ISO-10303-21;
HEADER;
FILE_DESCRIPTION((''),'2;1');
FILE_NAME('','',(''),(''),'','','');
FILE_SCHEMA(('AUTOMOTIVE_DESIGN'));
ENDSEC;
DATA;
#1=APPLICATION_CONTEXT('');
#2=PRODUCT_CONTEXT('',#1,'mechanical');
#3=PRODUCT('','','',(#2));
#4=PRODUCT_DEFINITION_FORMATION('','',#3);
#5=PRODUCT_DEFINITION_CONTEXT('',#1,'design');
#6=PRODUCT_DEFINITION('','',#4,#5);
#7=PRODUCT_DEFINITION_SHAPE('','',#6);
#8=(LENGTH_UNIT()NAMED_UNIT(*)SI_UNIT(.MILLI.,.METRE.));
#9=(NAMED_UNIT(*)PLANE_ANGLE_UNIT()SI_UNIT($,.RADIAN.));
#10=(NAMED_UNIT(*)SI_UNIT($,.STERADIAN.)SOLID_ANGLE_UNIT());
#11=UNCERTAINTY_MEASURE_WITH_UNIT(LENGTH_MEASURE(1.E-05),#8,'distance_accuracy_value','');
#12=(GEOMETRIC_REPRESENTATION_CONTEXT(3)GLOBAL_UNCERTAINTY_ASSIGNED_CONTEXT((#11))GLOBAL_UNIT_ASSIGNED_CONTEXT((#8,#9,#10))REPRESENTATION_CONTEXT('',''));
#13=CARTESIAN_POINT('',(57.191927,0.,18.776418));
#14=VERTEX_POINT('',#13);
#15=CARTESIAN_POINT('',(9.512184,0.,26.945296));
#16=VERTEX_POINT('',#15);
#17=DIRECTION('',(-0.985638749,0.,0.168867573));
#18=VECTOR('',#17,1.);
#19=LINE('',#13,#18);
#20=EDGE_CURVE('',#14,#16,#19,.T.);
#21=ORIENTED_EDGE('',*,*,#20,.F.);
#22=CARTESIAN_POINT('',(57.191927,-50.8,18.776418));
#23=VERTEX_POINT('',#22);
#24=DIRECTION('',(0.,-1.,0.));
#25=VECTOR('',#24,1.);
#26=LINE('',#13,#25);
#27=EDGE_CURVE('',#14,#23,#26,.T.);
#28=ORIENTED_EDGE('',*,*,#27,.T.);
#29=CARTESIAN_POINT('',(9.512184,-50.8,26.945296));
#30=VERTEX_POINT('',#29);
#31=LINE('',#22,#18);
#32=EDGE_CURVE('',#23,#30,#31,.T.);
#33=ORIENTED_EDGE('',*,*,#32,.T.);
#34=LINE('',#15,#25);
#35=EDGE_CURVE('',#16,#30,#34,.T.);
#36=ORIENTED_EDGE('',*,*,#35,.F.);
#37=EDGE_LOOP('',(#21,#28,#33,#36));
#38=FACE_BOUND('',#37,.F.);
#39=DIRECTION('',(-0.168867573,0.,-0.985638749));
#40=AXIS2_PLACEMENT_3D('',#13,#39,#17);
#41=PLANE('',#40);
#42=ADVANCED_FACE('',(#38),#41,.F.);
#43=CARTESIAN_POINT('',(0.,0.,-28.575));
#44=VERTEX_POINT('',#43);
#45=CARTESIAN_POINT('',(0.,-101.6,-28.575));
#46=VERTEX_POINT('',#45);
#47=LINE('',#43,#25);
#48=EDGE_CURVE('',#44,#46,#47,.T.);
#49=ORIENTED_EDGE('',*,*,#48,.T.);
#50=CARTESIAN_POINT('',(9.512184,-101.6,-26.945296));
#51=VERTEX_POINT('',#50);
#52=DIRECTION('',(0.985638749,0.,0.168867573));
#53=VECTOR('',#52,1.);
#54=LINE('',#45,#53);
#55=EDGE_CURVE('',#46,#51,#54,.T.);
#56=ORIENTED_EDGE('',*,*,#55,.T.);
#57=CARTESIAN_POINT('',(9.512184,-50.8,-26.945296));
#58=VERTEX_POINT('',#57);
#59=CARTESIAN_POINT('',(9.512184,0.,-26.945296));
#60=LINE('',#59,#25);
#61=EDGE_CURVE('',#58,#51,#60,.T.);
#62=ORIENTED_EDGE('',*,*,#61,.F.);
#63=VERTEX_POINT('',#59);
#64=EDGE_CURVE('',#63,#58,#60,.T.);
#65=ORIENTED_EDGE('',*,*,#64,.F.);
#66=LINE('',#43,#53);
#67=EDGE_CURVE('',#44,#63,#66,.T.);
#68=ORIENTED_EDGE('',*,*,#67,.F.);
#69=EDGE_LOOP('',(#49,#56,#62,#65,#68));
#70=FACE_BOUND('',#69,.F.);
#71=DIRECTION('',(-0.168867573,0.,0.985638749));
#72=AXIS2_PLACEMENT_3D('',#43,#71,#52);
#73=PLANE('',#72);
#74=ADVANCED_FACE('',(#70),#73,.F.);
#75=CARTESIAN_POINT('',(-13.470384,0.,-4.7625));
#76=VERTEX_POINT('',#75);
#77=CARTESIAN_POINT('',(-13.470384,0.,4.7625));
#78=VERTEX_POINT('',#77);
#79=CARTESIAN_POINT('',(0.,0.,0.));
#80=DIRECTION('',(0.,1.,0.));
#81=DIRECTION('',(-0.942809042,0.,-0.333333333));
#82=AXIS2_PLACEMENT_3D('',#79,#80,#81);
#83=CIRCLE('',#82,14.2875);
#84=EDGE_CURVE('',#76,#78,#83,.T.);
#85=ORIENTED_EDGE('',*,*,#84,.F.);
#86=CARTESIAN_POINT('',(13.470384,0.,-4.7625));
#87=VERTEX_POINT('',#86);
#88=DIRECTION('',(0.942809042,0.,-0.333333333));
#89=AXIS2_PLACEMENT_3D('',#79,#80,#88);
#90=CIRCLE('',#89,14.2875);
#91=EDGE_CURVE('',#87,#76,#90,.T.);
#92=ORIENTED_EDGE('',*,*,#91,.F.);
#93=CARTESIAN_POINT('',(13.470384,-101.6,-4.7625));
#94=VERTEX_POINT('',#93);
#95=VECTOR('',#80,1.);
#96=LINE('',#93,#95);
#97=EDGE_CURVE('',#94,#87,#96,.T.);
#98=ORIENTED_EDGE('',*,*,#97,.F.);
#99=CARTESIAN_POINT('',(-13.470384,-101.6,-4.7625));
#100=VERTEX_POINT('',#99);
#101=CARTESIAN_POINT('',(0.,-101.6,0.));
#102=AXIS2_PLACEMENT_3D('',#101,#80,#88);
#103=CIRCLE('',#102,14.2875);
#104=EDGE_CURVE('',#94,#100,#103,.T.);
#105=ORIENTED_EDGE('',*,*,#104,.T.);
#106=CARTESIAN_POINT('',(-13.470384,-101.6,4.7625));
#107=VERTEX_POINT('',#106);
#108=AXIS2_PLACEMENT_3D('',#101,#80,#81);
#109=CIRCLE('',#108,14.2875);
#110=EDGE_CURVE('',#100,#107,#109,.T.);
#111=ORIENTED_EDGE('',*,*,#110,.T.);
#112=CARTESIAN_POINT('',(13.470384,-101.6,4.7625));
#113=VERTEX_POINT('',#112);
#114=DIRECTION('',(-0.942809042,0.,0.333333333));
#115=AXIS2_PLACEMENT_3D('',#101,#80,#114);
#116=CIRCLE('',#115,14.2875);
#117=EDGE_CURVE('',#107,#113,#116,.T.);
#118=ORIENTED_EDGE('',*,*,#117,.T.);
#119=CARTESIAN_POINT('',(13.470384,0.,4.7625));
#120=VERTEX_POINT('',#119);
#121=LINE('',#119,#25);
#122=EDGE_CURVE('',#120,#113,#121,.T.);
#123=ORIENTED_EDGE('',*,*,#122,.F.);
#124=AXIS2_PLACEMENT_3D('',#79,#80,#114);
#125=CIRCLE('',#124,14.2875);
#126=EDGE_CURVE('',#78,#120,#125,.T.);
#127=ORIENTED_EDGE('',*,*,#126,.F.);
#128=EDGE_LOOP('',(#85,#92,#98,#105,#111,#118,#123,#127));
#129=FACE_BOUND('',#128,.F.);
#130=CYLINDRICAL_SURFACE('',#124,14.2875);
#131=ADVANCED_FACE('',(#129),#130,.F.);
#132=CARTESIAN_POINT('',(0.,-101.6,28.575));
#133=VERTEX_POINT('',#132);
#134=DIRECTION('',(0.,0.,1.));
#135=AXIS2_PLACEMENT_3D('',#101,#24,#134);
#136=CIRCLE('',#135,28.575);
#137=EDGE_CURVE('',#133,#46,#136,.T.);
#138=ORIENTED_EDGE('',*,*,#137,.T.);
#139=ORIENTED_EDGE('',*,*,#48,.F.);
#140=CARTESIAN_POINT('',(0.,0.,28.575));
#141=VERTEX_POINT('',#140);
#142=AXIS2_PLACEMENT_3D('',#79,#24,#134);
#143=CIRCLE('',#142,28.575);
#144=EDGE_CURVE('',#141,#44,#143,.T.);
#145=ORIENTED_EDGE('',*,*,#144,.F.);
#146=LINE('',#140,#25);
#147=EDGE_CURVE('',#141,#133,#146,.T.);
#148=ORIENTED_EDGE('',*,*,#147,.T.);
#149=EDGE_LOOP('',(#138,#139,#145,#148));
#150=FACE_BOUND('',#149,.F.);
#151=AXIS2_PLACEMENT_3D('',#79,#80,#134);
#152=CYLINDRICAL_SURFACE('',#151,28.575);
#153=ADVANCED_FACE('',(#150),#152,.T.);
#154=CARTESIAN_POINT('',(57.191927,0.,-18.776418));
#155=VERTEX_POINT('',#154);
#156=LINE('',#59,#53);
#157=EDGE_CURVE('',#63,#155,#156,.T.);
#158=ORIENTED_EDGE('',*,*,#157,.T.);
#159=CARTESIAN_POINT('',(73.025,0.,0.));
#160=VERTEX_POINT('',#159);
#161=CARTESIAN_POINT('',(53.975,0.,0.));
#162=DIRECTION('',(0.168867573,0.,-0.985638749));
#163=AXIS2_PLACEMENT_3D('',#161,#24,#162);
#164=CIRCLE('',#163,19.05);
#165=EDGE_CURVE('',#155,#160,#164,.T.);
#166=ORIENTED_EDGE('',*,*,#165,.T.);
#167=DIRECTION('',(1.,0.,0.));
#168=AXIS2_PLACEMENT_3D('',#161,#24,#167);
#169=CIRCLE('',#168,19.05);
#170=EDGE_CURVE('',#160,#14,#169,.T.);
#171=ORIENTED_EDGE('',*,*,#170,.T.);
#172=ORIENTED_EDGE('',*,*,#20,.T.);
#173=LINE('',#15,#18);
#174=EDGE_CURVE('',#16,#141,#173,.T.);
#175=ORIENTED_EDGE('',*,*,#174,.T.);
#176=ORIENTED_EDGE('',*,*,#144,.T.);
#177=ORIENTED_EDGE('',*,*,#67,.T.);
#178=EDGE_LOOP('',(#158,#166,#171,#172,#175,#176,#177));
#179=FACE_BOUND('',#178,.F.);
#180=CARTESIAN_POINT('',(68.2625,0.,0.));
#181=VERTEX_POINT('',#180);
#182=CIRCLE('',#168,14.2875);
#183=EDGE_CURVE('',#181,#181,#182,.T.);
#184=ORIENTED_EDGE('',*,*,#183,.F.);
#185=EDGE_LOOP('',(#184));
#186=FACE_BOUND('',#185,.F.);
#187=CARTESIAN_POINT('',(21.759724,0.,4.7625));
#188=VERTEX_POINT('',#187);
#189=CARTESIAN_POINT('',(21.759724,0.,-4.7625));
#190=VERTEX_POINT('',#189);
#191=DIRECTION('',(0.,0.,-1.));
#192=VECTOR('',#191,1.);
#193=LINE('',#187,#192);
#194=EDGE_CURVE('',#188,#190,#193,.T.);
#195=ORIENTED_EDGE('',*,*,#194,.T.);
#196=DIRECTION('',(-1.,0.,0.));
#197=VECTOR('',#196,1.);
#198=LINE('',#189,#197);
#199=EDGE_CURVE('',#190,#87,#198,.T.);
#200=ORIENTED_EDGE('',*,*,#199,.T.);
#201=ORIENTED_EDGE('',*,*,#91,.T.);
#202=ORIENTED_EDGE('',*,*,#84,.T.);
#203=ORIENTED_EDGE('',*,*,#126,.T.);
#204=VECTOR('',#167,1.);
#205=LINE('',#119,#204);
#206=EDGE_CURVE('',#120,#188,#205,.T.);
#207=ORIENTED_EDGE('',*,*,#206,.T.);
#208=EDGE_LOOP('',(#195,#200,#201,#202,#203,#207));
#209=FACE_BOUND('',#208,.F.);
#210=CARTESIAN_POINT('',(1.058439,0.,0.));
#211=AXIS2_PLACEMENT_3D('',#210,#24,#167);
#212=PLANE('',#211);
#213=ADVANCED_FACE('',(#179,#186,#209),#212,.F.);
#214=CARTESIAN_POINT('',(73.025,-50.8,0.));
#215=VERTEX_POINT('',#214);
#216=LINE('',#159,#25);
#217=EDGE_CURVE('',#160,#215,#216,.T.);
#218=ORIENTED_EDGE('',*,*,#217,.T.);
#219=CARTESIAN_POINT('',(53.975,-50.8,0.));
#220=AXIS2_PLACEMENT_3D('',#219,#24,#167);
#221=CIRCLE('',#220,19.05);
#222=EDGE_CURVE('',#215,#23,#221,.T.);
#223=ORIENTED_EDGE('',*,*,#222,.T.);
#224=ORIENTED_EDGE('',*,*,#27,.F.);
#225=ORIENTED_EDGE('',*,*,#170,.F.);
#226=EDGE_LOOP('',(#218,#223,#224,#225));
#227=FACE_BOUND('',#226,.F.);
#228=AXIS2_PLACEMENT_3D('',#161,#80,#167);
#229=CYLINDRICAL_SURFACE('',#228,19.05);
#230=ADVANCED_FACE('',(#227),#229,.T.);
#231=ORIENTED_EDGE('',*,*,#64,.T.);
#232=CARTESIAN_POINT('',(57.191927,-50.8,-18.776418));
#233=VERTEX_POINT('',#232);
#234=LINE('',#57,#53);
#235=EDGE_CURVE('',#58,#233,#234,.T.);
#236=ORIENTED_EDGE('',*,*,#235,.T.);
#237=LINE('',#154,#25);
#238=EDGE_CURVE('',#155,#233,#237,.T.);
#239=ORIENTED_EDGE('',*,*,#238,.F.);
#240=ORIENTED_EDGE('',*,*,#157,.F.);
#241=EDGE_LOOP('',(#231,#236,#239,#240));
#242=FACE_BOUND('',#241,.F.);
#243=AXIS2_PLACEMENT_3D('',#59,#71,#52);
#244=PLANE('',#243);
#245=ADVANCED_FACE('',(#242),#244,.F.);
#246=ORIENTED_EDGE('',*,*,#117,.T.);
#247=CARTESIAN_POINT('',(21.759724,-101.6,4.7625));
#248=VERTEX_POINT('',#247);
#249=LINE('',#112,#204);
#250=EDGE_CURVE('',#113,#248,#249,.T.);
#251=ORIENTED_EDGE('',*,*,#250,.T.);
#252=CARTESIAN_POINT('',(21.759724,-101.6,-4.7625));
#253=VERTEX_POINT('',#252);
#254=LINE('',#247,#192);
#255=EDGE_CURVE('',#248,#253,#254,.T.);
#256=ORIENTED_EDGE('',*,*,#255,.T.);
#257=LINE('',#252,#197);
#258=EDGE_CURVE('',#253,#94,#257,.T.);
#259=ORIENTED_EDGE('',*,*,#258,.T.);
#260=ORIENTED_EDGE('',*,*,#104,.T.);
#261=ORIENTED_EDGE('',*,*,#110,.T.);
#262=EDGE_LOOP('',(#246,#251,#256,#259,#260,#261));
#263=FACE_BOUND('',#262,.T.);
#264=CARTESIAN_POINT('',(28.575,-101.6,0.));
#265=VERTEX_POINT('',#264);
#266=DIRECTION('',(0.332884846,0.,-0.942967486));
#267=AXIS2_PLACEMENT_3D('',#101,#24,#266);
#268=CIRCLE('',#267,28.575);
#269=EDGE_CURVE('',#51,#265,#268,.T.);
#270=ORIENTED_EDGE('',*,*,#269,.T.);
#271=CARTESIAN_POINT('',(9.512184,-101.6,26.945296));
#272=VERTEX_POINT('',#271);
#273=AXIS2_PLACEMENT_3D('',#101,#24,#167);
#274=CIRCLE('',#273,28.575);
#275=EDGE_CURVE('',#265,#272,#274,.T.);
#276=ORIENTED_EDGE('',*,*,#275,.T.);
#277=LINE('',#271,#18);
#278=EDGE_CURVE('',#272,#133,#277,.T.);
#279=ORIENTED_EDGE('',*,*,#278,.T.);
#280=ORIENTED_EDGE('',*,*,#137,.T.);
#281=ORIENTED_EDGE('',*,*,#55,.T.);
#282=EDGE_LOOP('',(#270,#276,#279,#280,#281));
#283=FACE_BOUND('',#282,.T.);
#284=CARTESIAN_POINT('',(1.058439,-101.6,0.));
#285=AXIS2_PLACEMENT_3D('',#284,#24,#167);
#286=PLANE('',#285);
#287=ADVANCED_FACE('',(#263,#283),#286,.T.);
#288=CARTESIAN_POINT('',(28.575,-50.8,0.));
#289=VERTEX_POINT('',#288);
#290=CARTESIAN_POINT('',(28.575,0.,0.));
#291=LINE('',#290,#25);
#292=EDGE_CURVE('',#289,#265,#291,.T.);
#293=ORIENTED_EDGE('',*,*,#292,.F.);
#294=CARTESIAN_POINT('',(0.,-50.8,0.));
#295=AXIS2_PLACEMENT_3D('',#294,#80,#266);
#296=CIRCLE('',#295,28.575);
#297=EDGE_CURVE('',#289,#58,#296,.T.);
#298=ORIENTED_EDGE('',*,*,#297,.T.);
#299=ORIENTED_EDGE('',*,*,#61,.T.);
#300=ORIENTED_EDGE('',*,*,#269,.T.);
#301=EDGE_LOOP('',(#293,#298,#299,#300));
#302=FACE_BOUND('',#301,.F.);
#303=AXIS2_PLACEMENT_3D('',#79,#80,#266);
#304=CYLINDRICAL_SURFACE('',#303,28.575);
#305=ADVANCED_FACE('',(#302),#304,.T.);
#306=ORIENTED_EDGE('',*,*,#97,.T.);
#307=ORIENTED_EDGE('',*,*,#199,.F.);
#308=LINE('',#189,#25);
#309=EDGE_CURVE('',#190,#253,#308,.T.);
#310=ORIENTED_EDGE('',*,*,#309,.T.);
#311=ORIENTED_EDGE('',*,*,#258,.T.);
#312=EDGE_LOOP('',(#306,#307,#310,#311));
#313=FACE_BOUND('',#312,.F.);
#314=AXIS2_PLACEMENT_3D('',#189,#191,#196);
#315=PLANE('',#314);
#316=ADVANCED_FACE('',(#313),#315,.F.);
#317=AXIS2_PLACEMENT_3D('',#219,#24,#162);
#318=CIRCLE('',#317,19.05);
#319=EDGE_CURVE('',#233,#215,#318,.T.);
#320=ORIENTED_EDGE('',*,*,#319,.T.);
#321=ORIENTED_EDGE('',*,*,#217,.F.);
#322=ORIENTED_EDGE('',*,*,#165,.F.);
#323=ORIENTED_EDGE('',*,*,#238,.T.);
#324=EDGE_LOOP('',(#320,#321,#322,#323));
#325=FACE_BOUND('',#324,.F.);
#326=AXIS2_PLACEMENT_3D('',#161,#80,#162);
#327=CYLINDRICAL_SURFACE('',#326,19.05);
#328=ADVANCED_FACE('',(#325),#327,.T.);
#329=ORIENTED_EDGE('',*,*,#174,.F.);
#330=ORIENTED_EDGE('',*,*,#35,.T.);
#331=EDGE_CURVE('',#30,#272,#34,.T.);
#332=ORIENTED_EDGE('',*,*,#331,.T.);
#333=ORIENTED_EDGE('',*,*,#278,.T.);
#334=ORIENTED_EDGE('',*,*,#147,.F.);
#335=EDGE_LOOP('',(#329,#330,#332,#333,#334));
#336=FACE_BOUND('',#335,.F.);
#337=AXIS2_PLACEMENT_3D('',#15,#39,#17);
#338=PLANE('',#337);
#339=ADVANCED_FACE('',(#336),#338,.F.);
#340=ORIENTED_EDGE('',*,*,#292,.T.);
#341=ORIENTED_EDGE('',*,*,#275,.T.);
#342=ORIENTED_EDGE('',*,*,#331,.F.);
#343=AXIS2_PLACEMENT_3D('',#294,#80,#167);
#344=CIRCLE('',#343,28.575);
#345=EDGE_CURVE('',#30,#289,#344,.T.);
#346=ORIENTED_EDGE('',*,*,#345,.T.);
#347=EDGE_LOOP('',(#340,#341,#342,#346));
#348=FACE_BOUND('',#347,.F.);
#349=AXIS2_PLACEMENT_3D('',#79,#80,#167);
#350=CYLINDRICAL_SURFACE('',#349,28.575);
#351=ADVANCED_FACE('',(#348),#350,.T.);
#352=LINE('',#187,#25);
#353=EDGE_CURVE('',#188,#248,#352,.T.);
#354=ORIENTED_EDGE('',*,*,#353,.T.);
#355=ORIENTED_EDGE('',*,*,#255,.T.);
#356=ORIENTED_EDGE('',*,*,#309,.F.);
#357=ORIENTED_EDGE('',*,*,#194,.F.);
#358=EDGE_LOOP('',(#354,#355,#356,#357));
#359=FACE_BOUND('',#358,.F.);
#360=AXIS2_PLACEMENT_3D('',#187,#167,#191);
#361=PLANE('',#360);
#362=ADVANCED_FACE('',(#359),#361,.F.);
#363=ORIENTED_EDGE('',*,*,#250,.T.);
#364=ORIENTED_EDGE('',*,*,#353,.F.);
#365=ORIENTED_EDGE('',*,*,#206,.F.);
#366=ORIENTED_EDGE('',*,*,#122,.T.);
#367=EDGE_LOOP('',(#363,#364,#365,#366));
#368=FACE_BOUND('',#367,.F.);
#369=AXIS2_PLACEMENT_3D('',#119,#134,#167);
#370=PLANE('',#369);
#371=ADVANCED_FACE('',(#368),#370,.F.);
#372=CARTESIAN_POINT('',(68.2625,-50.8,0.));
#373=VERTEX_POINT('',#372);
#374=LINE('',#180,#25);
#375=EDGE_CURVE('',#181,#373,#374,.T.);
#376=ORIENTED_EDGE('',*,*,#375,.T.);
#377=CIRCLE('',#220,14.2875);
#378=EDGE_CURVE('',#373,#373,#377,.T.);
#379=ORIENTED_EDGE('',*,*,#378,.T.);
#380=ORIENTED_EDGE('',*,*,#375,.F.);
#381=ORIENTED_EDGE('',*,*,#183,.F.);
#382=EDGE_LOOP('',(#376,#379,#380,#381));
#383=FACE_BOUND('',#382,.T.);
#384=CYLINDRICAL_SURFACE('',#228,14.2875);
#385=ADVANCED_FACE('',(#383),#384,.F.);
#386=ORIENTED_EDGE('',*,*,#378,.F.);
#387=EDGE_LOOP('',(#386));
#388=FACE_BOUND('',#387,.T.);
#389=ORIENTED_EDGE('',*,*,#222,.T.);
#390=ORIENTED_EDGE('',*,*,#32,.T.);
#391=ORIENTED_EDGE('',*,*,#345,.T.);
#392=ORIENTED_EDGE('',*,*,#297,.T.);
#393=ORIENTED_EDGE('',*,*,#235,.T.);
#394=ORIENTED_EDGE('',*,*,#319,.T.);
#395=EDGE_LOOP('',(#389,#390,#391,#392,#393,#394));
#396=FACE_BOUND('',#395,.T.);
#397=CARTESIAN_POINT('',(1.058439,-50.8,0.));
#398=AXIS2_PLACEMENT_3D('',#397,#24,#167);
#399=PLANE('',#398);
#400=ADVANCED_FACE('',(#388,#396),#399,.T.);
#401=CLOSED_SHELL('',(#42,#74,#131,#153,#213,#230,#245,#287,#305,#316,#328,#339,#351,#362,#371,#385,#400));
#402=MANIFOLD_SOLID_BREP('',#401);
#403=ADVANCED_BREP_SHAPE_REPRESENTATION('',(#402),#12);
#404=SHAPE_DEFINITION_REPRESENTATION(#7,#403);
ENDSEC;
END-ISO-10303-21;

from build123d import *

# Parameters (mm, degrees)
F0_R     = 14.2875
F1_DEPTH = 50.8
F2_DEPTH = 101.6


with BuildPart() as f1:
    # F0 (on Front) → F1 (new body)
    with BuildSketch(Plane.XZ):
        with BuildLine():
            Line((9.5121844836, 26.9452959039), (0, 28.575))
            ThreePointArc((0, 28.575), (-28.575, 0), (0, -28.575))
            Line((0, -28.575), (9.5121844836, -26.9452959039))
            ThreePointArc((9.5121844836, -26.9452959039), (23.3274655355, -16.5033322905), (28.575, 0))
            ThreePointArc((28.575, 0), (23.3274655355, 16.5033322905), (9.5121844836, 26.9452959039))
        make_face()
        with BuildLine():
            ThreePointArc((-13.4703841816, 4.7625), (0, 14.2875), (13.4703841816, 4.7625))
            Line((13.4703841816, 4.7625), (21.7597242445, 4.7625))
            Line((21.7597242445, 4.7625), (21.7597242445, -4.7625))
            Line((21.7597242445, -4.7625), (13.4703841816, -4.7625))
            ThreePointArc((13.4703841816, -4.7625), (0, -14.2875), (-13.4703841816, -4.7625))
            Line((-13.4703841816, -4.7625), (-21.7597242445, -4.7625))
            Line((-21.7597242445, -4.7625), (-21.7597242445, 4.7625))
            Line((-21.7597242445, 4.7625), (-13.4703841816, 4.7625))
        make_face(mode=Mode.SUBTRACT)
        with BuildLine():
            Line((57.1919272622, 18.7764181619), (9.5121844836, 26.9452959039))
            ThreePointArc((9.5121844836, 26.9452959039), (23.3274655355, 16.5033322905), (28.575, 0))
            ThreePointArc((28.575, 0), (23.3274655355, -16.5033322905), (9.5121844836, -26.9452959039))
            Line((9.5121844836, -26.9452959039), (57.1919272622, -18.7764181619))
            ThreePointArc((57.1919272622, -18.7764181619), (34.925, 0), (57.1919272622, 18.7764181619))
        make_face()
        with BuildLine():
            ThreePointArc((73.025, 0), (68.5383952831, 12.2804730295), (57.1919272622, 18.7764181619))
            ThreePointArc((57.1919272622, 18.7764181619), (34.925, 0), (57.1919272622, -18.7764181619))
            ThreePointArc((57.1919272622, -18.7764181619), (68.5383952831, -12.2804730295), (73.025, 0))
        make_face()
        with Locations((53.975, 0)):
            Circle(F0_R, mode=Mode.SUBTRACT)
        with BuildLine():
            ThreePointArc((-13.4703841816, -4.7625), (-14.2875, 0), (-13.4703841816, 4.7625))
            Line((-13.4703841816, 4.7625), (-21.7597242445, 4.7625))
            Line((-21.7597242445, 4.7625), (-21.7597242445, -4.7625))
            Line((-21.7597242445, -4.7625), (-13.4703841816, -4.7625))
        make_face()
    extrude(amount=F1_DEPTH)

    # F0 (on Front) → F2 (join)
    with BuildSketch(Plane.XZ):
        with BuildLine():
            Line((9.5121844836, 26.9452959039), (0, 28.575))
            ThreePointArc((0, 28.575), (-28.575, 0), (0, -28.575))
            Line((0, -28.575), (9.5121844836, -26.9452959039))
            ThreePointArc((9.5121844836, -26.9452959039), (23.3274655355, -16.5033322905), (28.575, 0))
            ThreePointArc((28.575, 0), (23.3274655355, 16.5033322905), (9.5121844836, 26.9452959039))
        make_face()
        with BuildLine():
            ThreePointArc((-13.4703841816, 4.7625), (0, 14.2875), (13.4703841816, 4.7625))
            Line((13.4703841816, 4.7625), (21.7597242445, 4.7625))
            Line((21.7597242445, 4.7625), (21.7597242445, -4.7625))
            Line((21.7597242445, -4.7625), (13.4703841816, -4.7625))
            ThreePointArc((13.4703841816, -4.7625), (0, -14.2875), (-13.4703841816, -4.7625))
            Line((-13.4703841816, -4.7625), (-21.7597242445, -4.7625))
            Line((-21.7597242445, -4.7625), (-21.7597242445, 4.7625))
            Line((-21.7597242445, 4.7625), (-13.4703841816, 4.7625))
        make_face(mode=Mode.SUBTRACT)
        with BuildLine():
            ThreePointArc((-13.4703841816, -4.7625), (-14.2875, 0), (-13.4703841816, 4.7625))
            Line((-13.4703841816, 4.7625), (-21.7597242445, 4.7625))
            Line((-21.7597242445, 4.7625), (-21.7597242445, -4.7625))
            Line((-21.7597242445, -4.7625), (-13.4703841816, -4.7625))
        make_face()
    extrude(amount=F2_DEPTH)


solid = f1.part
